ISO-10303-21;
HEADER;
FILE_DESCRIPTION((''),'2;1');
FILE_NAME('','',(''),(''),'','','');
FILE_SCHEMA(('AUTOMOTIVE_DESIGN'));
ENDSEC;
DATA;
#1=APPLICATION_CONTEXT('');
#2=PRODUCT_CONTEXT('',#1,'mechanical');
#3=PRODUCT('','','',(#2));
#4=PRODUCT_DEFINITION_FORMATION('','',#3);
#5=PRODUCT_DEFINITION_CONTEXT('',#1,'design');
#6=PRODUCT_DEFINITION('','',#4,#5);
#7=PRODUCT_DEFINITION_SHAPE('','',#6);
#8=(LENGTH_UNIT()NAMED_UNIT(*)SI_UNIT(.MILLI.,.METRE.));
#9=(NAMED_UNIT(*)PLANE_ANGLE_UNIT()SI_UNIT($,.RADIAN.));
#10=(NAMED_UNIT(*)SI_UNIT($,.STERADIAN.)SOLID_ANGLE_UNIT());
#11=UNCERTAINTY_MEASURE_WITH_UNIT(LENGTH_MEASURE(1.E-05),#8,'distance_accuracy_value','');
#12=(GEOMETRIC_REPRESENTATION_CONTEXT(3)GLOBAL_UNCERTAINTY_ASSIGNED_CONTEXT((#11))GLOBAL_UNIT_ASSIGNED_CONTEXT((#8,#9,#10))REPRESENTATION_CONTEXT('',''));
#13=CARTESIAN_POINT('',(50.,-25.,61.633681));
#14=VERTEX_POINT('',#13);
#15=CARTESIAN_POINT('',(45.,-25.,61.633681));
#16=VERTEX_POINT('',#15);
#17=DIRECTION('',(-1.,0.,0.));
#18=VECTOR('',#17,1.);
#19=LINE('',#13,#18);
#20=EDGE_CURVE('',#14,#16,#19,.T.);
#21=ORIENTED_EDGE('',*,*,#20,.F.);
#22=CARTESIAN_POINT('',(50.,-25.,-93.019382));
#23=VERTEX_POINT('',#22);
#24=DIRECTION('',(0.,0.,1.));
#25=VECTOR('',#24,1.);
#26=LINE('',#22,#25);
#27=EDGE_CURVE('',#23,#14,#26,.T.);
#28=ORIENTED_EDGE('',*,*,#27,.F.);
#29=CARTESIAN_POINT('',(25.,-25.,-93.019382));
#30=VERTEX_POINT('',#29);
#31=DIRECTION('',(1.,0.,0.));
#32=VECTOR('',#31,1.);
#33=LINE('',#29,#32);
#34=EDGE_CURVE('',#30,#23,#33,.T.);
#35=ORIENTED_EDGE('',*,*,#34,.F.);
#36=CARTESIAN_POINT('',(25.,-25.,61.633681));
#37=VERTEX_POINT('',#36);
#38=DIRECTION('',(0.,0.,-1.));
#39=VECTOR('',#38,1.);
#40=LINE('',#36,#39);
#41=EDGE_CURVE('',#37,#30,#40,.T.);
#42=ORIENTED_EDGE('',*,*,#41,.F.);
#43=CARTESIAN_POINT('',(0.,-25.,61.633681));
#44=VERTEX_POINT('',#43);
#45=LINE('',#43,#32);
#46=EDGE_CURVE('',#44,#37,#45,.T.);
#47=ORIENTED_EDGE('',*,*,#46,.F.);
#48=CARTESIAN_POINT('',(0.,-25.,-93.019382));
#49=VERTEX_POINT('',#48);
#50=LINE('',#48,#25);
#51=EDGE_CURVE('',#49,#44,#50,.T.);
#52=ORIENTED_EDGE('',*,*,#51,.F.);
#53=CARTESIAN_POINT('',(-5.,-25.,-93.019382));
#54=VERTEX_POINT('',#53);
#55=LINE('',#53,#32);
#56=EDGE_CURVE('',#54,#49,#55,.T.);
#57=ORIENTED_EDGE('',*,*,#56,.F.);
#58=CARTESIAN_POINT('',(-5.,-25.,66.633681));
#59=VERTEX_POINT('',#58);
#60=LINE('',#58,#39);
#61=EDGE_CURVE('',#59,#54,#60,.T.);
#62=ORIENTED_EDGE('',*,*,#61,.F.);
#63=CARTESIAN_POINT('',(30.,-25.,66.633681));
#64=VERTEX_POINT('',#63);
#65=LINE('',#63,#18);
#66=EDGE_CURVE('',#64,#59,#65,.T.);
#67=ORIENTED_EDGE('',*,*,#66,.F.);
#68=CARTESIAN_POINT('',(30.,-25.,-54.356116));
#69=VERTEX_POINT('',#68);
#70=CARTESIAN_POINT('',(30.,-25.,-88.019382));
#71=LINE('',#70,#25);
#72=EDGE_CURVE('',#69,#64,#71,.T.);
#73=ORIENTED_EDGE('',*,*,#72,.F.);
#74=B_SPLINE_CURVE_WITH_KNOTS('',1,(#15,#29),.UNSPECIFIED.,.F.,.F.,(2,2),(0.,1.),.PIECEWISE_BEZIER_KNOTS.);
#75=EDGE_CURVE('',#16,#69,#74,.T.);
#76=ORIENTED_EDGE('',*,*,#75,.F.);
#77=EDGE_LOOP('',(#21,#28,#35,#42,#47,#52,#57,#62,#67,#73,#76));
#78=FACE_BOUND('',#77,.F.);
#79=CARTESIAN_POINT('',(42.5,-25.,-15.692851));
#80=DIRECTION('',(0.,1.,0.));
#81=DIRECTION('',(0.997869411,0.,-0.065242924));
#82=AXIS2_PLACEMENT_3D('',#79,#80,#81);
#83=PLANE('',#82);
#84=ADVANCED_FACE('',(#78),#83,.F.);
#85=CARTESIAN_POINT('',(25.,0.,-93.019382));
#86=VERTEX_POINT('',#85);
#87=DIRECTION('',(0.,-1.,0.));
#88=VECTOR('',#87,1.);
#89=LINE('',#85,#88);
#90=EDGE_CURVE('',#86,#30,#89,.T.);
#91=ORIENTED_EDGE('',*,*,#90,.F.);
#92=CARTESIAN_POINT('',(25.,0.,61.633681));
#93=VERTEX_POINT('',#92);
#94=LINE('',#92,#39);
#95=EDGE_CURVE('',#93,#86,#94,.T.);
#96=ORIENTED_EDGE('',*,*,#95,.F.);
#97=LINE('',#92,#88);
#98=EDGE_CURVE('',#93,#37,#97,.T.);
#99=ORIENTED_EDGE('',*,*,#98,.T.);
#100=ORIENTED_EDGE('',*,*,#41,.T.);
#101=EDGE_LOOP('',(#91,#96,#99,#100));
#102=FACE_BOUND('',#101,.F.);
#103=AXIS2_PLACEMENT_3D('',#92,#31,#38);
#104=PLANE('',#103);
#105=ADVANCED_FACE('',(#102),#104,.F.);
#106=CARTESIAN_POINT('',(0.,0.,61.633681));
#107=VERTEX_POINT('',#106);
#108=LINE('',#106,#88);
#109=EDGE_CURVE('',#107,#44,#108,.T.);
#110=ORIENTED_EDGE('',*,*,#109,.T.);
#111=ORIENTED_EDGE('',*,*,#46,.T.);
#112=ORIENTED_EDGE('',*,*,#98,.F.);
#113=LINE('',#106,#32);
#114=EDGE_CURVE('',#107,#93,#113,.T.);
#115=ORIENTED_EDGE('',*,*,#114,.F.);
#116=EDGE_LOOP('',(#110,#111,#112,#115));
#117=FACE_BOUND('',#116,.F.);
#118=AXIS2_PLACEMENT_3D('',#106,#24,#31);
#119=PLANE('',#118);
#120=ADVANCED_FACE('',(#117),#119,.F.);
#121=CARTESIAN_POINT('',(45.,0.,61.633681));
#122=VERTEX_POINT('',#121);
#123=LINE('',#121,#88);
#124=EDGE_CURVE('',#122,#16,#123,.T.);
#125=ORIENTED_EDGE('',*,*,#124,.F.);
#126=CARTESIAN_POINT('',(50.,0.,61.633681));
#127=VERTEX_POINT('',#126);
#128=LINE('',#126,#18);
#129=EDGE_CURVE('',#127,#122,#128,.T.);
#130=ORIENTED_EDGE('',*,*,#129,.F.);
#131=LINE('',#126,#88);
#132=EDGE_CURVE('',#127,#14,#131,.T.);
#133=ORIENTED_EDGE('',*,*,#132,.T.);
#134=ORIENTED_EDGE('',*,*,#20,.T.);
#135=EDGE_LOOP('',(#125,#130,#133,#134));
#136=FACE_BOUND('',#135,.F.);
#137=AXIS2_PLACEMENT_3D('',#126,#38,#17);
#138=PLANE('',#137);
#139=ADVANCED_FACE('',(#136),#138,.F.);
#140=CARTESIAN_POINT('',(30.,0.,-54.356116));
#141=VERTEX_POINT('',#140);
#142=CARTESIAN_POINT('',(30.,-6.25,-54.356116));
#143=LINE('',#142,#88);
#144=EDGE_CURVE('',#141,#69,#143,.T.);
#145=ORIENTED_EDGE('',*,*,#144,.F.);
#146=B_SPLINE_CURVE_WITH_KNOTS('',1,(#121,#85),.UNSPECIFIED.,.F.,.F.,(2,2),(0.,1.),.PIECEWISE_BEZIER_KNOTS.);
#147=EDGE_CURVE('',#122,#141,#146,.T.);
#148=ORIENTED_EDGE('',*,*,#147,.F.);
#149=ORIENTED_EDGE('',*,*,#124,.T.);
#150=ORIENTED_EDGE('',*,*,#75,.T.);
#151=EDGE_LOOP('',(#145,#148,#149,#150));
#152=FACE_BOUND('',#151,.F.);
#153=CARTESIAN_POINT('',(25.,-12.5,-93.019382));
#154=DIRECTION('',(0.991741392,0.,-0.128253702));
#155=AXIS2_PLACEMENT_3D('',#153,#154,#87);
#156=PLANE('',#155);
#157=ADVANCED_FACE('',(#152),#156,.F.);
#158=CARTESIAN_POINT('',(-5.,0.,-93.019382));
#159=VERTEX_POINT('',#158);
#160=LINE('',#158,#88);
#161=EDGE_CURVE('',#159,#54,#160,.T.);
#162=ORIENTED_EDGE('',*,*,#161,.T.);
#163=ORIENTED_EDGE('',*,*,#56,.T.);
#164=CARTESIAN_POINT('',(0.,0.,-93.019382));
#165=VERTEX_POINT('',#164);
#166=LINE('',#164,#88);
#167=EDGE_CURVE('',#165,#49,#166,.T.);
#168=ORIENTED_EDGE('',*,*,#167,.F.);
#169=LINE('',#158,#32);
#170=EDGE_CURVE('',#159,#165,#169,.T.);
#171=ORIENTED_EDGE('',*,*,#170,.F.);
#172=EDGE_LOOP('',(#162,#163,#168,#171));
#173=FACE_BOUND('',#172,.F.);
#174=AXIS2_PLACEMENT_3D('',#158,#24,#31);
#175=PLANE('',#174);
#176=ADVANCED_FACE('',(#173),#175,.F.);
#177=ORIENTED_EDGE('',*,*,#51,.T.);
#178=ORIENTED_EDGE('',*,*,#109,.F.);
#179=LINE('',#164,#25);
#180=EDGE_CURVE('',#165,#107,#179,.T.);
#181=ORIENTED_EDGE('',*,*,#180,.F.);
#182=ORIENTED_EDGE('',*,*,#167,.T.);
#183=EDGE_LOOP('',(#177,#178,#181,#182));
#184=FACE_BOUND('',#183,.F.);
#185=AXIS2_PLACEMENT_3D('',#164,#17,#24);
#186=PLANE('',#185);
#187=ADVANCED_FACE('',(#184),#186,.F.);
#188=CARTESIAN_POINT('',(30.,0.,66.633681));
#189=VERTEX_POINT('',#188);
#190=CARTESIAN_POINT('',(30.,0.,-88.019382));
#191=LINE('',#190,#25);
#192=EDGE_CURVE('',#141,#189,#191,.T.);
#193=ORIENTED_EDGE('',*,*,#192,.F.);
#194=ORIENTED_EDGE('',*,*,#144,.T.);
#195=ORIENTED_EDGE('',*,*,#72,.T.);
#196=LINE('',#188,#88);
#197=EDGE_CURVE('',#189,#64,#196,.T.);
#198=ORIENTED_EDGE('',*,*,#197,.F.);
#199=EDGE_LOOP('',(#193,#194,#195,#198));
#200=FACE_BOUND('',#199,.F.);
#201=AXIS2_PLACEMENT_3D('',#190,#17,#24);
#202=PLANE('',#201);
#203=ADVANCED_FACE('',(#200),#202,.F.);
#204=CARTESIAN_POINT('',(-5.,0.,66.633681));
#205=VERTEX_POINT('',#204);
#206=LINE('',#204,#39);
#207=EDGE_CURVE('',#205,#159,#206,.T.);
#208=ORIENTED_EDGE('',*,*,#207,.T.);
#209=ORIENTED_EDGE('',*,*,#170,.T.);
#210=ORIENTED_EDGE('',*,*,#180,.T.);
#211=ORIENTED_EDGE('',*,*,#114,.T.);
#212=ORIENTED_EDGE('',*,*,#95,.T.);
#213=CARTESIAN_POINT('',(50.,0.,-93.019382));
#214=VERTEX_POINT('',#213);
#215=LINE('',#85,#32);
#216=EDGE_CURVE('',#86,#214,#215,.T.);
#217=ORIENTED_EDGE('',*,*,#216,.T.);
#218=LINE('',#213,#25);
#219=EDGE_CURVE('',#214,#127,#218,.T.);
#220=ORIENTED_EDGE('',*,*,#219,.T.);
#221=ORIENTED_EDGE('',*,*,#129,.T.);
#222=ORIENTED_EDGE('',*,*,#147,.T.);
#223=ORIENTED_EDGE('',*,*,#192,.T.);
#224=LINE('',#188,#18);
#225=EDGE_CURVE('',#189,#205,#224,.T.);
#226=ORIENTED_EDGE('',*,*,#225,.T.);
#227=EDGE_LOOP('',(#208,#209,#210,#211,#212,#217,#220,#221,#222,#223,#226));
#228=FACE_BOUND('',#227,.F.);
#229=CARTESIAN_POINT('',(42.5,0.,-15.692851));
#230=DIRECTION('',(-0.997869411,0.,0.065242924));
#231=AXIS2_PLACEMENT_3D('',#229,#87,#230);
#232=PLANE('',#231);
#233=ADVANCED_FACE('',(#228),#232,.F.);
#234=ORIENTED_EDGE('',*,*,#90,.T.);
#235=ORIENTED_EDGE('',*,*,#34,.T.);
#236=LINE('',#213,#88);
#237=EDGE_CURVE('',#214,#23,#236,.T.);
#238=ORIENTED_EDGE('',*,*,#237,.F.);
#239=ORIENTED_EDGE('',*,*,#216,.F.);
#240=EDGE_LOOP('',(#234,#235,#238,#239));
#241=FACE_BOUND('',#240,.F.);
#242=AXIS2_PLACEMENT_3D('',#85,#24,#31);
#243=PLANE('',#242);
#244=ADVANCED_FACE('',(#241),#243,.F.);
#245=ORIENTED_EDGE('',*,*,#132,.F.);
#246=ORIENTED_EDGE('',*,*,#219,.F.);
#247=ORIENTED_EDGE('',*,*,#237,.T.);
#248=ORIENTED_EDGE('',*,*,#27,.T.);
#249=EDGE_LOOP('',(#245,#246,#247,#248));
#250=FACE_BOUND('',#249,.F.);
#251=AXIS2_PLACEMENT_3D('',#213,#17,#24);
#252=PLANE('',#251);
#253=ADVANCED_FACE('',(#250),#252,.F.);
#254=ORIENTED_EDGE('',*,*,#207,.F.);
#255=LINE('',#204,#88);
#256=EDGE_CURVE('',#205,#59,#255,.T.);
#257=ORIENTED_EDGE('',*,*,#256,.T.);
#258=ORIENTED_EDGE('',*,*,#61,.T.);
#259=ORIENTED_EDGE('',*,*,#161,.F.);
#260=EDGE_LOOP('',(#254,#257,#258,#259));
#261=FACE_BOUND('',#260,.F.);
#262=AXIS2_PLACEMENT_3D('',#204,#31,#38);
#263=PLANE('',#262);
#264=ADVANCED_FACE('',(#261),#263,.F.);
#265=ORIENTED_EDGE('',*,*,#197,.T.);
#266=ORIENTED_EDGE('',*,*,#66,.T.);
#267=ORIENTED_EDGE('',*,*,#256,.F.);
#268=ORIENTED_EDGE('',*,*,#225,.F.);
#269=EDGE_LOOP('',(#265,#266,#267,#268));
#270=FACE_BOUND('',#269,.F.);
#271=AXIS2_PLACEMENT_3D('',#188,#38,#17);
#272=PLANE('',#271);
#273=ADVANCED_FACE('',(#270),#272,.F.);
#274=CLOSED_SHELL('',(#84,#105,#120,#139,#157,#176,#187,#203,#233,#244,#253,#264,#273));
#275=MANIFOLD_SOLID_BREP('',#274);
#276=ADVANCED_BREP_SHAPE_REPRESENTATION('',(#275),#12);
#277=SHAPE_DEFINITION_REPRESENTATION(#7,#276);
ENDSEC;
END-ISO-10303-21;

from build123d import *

# Parameters (mm, degrees)
F1_DEPTH   = 25
F1_FACE_W  = 5
F1_FACE_H  = 25
F1_FACE1_W = 25
F1_FACE1_H = 25


with BuildPart() as f1:
    # F0 (on Front) → F1 (new body)
    with BuildSketch(Plane.XZ):
        Polygon((0, -93.0193822413), (0, 61.6336810916), (25, 61.6336810916), (25, -93.0193822413), (50, -93.0193822413), (50, 61.6336810916), (45, 61.6336810916), (45, -88.0193822413), (30, -88.0193822413), (30, 66.6336810916), (-5, 66.6336810916), (-5, -93.0193822413), align=None)
    extrude(amount=F1_DEPTH)

    # F1_face (on face) → F2 section 0
    with BuildSketch(Plane(origin=(47.5, -12.5, 61.6336810916), x_dir=(1, 0, 0), z_dir=(0, 0, 1))):
        Rectangle(F1_FACE_W, F1_FACE_H)
    # F1_face1 (on face) → F2 section 1
    with BuildSketch(Plane(origin=(37.5, -12.5, -93.0193822413), x_dir=(1, 0, 0), z_dir=(0, 0, -1))):
        Rectangle(F1_FACE1_W, F1_FACE1_H)
    loft()


solid = f1.part
